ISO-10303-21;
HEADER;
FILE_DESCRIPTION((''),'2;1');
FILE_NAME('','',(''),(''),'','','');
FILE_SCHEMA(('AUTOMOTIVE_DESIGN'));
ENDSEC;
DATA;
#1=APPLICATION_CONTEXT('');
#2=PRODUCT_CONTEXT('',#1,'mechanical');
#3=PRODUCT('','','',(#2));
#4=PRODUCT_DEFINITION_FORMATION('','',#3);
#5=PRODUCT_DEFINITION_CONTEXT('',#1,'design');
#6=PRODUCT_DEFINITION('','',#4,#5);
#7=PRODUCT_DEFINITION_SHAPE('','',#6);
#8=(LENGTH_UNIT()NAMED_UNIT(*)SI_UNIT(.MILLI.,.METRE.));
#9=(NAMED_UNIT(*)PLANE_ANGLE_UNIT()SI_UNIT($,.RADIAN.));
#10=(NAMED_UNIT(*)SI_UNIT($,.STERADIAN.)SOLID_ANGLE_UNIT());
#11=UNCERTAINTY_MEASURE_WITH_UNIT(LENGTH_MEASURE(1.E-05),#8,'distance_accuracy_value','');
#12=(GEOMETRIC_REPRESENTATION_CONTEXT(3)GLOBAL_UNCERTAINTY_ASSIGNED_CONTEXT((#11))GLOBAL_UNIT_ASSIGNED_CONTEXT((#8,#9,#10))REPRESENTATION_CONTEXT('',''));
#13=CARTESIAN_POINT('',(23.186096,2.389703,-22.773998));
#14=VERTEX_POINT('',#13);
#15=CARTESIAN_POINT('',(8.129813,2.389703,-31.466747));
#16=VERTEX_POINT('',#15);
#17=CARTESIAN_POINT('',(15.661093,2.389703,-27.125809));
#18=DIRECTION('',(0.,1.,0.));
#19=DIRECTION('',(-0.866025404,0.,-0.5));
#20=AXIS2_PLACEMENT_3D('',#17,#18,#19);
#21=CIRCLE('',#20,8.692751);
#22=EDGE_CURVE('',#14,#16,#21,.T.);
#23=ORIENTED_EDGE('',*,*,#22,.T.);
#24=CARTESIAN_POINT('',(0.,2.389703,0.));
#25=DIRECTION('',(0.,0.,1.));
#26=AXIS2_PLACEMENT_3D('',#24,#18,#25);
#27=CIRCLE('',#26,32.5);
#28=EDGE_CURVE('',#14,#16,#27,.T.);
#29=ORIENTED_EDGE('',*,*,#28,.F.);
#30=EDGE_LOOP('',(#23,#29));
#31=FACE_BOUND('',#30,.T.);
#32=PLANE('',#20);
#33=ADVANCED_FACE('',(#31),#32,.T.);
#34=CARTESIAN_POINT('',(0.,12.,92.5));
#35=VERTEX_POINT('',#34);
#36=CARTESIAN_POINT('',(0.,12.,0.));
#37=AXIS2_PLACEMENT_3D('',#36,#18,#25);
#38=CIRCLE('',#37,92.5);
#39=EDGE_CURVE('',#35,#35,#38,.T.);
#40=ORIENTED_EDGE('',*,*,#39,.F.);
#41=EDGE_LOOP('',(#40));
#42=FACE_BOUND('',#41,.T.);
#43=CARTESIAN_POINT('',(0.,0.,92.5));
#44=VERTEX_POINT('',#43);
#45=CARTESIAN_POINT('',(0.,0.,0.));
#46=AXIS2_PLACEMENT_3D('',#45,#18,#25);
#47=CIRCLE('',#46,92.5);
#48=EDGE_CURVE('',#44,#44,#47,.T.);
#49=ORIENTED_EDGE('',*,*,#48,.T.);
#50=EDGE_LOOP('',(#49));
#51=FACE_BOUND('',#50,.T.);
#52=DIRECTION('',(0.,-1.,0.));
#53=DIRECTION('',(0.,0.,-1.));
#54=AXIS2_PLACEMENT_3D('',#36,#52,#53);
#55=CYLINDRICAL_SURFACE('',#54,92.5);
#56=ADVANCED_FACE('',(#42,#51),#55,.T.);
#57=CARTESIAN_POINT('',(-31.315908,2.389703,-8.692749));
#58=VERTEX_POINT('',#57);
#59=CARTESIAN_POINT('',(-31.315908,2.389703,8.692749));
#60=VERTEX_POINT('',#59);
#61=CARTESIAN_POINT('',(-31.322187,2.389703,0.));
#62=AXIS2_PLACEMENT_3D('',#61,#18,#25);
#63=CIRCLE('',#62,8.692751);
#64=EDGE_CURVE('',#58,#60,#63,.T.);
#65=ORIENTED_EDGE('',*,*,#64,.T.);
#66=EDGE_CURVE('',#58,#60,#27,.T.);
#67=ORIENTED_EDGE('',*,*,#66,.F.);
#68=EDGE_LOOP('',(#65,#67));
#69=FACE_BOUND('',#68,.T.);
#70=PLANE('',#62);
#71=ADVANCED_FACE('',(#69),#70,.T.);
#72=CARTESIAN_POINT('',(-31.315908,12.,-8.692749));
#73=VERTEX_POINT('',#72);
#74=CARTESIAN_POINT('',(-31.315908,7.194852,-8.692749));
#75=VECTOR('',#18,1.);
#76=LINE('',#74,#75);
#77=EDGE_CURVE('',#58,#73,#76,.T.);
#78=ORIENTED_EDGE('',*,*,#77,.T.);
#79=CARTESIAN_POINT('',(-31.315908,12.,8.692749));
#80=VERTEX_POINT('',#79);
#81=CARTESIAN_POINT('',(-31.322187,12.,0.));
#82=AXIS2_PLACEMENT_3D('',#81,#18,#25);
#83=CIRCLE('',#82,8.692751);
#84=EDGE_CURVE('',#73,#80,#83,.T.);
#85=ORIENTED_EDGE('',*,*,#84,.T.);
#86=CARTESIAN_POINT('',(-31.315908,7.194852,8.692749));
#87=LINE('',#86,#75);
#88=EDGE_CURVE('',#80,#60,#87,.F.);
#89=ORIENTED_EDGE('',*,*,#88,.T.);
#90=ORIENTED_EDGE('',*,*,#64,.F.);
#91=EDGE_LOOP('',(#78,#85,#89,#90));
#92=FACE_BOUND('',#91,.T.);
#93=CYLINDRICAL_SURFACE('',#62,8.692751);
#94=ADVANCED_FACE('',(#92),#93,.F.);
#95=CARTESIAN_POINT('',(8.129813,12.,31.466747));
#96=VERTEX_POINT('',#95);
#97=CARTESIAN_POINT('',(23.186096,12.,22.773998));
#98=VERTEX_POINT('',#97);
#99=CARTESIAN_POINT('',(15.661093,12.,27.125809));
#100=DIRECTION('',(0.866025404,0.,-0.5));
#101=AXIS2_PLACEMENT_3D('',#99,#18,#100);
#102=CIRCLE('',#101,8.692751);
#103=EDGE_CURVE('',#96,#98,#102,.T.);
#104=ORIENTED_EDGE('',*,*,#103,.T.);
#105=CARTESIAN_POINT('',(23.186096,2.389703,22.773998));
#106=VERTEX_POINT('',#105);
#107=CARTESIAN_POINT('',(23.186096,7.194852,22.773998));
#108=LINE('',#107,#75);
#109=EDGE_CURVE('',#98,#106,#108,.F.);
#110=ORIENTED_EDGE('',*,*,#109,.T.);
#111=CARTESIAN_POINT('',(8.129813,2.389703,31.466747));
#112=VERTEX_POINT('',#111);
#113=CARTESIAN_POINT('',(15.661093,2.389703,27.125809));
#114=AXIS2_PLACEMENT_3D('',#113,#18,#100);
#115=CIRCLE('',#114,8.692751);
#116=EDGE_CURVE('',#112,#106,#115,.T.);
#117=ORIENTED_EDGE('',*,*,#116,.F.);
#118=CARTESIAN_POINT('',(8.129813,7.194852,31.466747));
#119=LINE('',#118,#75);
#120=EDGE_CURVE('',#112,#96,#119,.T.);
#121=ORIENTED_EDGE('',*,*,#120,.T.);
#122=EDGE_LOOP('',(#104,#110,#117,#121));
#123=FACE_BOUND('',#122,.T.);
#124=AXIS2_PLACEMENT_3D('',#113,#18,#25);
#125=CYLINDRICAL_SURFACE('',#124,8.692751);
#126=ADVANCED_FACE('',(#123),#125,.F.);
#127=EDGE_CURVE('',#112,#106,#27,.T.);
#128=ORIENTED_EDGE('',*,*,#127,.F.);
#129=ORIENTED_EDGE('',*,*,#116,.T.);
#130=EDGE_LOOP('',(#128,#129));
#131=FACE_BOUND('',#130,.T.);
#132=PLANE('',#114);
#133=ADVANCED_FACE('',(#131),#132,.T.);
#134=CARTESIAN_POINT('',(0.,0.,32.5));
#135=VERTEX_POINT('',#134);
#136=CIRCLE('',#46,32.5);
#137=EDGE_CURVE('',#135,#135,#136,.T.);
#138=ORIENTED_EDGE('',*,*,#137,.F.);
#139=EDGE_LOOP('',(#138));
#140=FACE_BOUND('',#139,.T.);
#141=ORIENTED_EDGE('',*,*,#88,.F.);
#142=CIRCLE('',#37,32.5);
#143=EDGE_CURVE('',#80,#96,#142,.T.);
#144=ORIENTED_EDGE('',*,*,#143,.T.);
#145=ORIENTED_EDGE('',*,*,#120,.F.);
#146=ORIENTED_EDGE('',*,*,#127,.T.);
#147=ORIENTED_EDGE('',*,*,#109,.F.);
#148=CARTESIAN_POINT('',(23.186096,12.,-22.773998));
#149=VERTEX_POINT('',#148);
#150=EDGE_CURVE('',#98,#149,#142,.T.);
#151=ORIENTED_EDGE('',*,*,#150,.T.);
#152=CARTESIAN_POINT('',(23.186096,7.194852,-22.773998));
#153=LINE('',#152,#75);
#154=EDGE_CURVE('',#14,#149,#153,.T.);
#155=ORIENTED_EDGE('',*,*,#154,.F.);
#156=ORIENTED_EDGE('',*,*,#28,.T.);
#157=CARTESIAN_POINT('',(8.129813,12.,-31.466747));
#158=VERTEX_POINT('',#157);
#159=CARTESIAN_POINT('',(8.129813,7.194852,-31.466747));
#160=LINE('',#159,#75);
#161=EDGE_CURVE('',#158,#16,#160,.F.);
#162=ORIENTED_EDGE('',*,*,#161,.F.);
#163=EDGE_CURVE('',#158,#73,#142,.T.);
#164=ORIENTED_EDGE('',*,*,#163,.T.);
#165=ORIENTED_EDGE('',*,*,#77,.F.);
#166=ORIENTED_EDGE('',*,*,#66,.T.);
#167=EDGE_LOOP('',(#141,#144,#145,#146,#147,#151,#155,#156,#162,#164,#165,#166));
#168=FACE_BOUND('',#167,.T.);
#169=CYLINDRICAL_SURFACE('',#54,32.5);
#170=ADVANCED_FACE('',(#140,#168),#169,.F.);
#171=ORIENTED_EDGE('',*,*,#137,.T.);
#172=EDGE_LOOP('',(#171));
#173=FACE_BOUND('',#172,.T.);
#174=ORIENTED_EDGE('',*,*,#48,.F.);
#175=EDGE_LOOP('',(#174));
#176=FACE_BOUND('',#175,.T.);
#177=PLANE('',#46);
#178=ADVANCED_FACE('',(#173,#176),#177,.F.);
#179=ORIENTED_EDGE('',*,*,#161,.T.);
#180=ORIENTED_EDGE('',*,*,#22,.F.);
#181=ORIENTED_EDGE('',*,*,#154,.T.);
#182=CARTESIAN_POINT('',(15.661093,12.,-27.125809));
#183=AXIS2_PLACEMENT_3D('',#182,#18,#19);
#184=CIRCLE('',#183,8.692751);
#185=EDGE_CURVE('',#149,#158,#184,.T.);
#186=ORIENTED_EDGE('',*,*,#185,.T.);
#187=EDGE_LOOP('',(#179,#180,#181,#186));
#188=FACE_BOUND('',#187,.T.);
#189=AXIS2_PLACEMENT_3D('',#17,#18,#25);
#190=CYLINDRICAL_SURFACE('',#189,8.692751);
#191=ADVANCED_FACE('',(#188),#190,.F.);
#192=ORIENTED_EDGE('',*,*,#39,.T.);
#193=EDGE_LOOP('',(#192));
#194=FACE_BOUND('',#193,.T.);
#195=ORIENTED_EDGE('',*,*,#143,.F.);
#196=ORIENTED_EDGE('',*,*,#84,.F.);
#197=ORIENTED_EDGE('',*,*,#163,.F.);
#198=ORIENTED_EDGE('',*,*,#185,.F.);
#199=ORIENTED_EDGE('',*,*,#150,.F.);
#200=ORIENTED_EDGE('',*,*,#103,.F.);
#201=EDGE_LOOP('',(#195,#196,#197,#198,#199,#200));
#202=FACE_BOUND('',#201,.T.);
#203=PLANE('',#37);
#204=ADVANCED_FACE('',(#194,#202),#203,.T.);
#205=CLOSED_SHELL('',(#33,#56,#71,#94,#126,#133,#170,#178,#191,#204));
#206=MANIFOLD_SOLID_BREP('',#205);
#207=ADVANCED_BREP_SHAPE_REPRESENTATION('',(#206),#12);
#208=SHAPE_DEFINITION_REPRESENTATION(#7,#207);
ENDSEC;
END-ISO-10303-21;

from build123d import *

# Parameters (mm, degrees)
SKETCH1_R           = 92.5
BOSS_EXTRUDE1_DEPTH = 12
SKETCH2_R           = 32.5
CUT_EXTRUDE1_DEPTH  = 132.363998112
SKETCH3_R           = 8.692751427
CUT_EXTRUDE2_DEPTH  = 9.610296575
CIRPATTERN1_COUNT   = 3


with BuildPart() as part:
    # Sketch1 → Boss-Extrude1 (new body)
    with BuildSketch(Plane(origin=(0, 0, 0), x_dir=(1, 0, 0), z_dir=(0, 1, 0))):
        Circle(SKETCH1_R)
    extrude(amount=BOSS_EXTRUDE1_DEPTH)

    # Sketch2 → Cut-Extrude1 (cut, through all)
    with BuildSketch(Plane(origin=(0, 0, 0), x_dir=(1, 0, 0), z_dir=(0, 1, 0))):
        Circle(SKETCH2_R)
    extrude(amount=CUT_EXTRUDE1_DEPTH, mode=Mode.SUBTRACT)

    # Sketch3 → Cut-Extrude2 (cut)
    with BuildSketch(Plane(origin=(0, 12, 0), x_dir=(1, 0, 0), z_dir=(0, 1, 0))):
        with Locations((-31.322186797, 0)):
            Circle(SKETCH3_R)
    cut_extrude2 = extrude(amount=-CUT_EXTRUDE2_DEPTH, mode=Mode.SUBTRACT)

    # CirPattern1: Cut-Extrude2 ×3 about axis
    cirpattern1_axis = Axis((0, 0, 0), (0, 1, 0))
    for i in range(1, CIRPATTERN1_COUNT):
        add(cut_extrude2.rotate(cirpattern1_axis, i * 360 / CIRPATTERN1_COUNT), mode=Mode.SUBTRACT)


solid = part.part
